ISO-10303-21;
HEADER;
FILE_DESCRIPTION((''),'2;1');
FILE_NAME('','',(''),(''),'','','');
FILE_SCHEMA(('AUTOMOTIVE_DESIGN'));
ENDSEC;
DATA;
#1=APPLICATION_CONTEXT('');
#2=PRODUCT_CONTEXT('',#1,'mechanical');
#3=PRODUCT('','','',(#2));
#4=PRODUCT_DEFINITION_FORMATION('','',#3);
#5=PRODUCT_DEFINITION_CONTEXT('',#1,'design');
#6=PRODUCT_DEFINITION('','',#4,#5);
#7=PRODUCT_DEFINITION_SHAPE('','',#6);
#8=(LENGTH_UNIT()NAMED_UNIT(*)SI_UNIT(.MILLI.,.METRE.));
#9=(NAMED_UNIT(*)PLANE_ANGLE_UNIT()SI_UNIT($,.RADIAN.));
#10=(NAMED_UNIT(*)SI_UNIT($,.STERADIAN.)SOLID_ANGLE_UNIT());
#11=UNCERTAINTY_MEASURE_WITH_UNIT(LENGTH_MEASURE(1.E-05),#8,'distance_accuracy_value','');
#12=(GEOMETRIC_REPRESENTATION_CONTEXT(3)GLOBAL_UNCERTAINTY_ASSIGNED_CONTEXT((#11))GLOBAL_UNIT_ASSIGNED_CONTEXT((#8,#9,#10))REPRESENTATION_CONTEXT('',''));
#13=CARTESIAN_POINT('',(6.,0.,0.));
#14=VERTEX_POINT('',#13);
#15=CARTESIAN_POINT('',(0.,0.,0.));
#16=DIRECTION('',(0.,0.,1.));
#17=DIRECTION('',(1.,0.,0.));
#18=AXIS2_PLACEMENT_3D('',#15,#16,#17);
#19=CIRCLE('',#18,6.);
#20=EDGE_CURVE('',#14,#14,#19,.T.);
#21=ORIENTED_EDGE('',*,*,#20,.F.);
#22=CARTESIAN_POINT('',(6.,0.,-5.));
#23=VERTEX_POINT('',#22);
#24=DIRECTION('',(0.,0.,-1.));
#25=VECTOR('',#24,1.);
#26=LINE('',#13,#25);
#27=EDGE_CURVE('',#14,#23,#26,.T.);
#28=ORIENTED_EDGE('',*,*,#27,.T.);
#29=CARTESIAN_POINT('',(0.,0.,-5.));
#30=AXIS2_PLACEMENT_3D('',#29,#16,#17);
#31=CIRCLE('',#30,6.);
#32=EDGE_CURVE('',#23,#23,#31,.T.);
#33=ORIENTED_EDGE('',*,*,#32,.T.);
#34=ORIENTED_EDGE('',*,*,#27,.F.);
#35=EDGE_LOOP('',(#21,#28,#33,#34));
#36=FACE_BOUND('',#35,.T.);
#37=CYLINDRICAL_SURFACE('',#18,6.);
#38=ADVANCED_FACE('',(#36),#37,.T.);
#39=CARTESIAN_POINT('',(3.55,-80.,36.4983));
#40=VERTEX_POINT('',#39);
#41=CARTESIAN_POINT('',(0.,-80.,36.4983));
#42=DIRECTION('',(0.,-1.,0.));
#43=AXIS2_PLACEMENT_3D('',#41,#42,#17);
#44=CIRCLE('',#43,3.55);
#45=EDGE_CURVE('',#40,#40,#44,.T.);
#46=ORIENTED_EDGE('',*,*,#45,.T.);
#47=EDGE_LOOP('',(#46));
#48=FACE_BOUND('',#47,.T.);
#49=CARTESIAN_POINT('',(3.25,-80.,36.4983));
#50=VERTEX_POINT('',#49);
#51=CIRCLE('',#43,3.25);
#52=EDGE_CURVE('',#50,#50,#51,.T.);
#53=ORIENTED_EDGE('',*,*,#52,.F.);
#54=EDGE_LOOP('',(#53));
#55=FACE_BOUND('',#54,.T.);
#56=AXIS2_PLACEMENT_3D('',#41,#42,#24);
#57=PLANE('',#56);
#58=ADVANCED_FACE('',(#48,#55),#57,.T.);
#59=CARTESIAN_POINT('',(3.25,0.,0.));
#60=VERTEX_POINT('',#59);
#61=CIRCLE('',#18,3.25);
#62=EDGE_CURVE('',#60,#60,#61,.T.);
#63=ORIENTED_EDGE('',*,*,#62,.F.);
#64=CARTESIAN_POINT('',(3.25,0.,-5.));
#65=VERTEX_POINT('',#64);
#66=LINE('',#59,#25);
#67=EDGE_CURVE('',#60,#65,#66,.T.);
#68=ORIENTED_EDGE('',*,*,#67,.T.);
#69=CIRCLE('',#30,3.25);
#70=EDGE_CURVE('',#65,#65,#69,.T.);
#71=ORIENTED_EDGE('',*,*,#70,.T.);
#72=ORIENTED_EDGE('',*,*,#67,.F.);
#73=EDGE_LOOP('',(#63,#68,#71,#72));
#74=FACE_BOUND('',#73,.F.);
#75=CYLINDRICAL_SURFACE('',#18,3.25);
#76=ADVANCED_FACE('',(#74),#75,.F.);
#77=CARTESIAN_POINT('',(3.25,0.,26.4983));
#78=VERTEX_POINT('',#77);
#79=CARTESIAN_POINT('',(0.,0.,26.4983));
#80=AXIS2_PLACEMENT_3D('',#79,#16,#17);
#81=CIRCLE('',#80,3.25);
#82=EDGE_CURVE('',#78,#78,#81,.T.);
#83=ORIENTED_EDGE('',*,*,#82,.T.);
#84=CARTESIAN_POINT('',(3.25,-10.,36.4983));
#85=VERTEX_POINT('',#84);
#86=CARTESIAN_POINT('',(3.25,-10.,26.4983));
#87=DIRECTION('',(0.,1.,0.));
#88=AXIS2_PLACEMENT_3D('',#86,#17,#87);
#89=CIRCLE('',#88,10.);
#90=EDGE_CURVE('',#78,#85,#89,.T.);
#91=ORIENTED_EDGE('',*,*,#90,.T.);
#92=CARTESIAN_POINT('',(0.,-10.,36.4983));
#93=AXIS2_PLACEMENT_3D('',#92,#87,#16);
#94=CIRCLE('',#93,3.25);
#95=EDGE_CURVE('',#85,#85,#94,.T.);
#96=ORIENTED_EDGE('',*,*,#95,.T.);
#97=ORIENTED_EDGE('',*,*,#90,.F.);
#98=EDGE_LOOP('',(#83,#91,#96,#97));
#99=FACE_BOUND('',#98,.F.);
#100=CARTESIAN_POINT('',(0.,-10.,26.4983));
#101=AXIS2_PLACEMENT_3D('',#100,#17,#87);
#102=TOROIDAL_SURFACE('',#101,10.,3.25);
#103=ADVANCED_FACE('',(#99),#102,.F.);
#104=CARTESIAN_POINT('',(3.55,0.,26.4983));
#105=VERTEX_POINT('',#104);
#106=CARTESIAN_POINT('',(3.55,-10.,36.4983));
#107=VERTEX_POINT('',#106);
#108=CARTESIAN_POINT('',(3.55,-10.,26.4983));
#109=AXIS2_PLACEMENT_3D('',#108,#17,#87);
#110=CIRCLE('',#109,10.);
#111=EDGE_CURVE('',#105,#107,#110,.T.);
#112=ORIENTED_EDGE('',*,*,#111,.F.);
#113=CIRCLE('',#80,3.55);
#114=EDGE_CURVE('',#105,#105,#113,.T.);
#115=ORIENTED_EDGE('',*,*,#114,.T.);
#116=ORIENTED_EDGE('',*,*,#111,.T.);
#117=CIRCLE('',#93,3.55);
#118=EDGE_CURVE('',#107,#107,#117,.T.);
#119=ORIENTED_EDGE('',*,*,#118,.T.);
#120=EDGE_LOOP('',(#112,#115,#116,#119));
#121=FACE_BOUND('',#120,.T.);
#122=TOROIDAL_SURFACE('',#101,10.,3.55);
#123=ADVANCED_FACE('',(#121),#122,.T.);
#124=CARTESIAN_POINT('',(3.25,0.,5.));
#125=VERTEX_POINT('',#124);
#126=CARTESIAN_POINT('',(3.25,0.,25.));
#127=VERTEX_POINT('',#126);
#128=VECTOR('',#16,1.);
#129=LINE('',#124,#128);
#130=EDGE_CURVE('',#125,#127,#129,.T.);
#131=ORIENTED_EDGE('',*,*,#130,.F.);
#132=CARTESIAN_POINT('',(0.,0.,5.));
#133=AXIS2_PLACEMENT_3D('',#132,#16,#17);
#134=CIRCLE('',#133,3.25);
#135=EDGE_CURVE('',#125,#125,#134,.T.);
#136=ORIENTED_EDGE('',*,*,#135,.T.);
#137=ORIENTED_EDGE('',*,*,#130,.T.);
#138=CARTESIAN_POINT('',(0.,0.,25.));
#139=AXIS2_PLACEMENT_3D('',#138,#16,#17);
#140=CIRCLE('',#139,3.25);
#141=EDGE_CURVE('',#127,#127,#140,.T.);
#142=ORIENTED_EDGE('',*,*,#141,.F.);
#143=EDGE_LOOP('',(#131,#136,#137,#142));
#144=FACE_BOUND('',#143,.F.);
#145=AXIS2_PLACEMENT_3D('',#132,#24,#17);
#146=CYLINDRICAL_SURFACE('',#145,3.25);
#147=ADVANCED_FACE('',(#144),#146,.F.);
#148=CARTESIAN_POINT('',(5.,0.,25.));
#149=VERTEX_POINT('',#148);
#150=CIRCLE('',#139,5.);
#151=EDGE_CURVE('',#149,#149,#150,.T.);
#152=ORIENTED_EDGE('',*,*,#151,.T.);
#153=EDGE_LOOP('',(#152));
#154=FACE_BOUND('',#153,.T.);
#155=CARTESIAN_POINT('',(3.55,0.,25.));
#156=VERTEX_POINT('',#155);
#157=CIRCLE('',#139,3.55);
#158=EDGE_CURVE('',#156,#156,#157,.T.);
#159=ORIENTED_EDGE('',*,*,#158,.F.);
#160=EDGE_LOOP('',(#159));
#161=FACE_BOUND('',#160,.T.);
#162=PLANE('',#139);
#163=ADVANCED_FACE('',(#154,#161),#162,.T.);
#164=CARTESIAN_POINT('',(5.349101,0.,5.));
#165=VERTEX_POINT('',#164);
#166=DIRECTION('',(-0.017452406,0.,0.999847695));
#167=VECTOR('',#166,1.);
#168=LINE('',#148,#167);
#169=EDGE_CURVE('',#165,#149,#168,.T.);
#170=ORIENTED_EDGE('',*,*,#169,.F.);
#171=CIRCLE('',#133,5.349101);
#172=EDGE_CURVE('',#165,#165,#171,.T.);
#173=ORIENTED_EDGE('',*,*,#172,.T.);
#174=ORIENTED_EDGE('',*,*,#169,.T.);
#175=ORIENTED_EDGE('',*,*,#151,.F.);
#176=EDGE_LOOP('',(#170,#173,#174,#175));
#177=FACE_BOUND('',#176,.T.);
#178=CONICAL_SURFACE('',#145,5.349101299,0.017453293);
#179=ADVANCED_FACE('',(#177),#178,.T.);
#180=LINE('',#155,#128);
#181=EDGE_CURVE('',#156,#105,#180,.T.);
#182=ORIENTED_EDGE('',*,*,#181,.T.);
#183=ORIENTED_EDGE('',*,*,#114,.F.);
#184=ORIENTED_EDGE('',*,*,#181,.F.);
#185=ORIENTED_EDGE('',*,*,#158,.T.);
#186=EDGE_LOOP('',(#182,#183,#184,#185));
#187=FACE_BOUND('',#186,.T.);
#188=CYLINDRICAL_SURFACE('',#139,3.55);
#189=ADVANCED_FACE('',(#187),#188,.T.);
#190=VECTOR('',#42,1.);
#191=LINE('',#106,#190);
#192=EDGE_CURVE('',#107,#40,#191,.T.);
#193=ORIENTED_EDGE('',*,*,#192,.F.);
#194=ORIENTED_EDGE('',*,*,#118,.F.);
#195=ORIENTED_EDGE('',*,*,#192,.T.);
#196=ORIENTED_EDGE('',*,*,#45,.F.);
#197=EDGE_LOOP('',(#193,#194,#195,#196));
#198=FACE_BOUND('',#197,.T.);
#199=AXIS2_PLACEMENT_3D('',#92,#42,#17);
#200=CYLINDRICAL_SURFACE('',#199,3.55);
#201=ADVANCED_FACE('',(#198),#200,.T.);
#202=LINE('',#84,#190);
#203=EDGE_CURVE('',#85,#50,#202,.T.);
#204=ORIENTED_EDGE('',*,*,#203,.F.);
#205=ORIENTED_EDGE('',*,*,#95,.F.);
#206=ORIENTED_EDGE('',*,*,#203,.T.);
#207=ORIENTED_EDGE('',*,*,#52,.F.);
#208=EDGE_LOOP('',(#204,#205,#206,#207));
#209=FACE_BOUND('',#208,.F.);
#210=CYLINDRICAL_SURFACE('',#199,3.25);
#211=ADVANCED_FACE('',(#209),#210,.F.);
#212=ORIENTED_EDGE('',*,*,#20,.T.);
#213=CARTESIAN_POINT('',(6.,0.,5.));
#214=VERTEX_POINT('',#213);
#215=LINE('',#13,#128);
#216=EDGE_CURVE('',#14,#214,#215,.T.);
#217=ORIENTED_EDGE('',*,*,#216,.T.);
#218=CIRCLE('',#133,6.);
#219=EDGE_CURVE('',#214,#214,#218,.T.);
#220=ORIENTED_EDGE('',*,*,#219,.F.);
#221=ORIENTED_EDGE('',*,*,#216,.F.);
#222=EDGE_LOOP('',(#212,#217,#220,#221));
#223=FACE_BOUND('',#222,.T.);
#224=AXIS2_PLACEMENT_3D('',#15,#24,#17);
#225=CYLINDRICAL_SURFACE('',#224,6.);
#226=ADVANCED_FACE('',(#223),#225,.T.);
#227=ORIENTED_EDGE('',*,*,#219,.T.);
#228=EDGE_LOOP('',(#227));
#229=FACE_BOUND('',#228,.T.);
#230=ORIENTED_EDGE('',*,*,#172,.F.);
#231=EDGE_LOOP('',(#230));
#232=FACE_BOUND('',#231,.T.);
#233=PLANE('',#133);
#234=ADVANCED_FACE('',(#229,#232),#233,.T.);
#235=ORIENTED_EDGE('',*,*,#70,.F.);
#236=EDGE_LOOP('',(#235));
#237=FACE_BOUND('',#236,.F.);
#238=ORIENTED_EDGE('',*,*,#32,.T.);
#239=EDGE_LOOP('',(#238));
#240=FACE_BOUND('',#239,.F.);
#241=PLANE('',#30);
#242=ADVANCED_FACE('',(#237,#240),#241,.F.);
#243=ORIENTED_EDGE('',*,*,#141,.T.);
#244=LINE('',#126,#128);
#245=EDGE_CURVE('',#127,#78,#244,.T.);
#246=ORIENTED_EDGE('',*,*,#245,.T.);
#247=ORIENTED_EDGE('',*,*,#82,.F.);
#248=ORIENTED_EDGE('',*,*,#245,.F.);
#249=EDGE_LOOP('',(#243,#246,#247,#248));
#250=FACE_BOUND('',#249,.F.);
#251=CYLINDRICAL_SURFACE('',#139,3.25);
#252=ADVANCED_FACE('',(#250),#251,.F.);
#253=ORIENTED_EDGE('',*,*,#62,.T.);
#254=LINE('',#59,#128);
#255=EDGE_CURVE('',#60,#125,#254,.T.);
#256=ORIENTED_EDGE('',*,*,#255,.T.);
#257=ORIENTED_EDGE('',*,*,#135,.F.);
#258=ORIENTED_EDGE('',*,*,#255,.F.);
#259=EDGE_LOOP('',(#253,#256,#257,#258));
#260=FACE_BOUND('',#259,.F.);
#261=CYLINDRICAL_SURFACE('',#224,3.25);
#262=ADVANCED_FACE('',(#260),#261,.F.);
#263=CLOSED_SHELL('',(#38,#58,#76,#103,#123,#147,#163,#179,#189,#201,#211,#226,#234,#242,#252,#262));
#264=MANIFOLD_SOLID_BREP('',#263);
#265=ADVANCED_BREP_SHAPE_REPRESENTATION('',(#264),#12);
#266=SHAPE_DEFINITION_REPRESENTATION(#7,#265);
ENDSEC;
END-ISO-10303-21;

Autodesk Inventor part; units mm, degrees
ref_plane "YZ Plane" through (0, 0, 0) normal (1, 0, 0) x (0, 1, 0)
ref_plane "XZ Plane" through (0, 0, 0) normal (0, 1, 0) x (-1, 0, 0)
ref_plane "XY Plane" through (0, 0, 0) normal (0, 0, 1) x (1, 0, 0)
sketch "Esboço1" plane through (0, 0, 0) normal (0, 0, 1) x (1, 0, 0)
  circle A0 centre (0, 0) radius 3.25 projected
  circle A1 centre (0, 0) radius 6
  point P0 (0, 0)
  dimension "d0" = 12
extrude "Extrusão1" add sketch "Esboço1" along normal mid plane 10
sketch "Esboço2" plane through (0, 0, 5) normal (0, 0, 1) x (1, 0, 0)
  circle A0 centre (0, 0) radius 6 projected
  circle A1 centre (0, 0) radius 5
  circle A2 centre (0, 0) radius 3.25 projected
  point P0 (0, 0)
  dimension "d3" = 1
extrude "Extrusão2" add sketch "Esboço2" along normal blind 20 contours A1
draft "Face para inclinação de faces1" angle 1 pull direction (0, 0, 1) faces at (4.9353, -0.8021, 18.3333) fixed edges at (-5, 0, 25)
sketch "Esboço3" plane through (0, 0, 25) normal (0, 0, 1) x (1, 0, 0)
  circle A0 centre (0, 0) radius 3.25 projected
  circle A1 centre (0, 0) radius 3.55
  point P0 (0, 0)
  dimension "d7" = 0.3
sketch3d "Esboço 3D1"
  line L0 (0, 0, 25) -> (0, 0, 26.4983)
  arc A0 (0, 0, 26.4983) -> (0, -10, 36.4983) centre (0, -10, 26.4983) ccw
  line L1 (0, -10, 36.4983) -> (0, -80, 36.4983)
  dimension "d8" = 80
  dimension "d9" = 10
sweep "Varredura1" add profiles "Esboço3" path "Esboço 3D1"
properties part number "Tubo de Entrada do Ar"
